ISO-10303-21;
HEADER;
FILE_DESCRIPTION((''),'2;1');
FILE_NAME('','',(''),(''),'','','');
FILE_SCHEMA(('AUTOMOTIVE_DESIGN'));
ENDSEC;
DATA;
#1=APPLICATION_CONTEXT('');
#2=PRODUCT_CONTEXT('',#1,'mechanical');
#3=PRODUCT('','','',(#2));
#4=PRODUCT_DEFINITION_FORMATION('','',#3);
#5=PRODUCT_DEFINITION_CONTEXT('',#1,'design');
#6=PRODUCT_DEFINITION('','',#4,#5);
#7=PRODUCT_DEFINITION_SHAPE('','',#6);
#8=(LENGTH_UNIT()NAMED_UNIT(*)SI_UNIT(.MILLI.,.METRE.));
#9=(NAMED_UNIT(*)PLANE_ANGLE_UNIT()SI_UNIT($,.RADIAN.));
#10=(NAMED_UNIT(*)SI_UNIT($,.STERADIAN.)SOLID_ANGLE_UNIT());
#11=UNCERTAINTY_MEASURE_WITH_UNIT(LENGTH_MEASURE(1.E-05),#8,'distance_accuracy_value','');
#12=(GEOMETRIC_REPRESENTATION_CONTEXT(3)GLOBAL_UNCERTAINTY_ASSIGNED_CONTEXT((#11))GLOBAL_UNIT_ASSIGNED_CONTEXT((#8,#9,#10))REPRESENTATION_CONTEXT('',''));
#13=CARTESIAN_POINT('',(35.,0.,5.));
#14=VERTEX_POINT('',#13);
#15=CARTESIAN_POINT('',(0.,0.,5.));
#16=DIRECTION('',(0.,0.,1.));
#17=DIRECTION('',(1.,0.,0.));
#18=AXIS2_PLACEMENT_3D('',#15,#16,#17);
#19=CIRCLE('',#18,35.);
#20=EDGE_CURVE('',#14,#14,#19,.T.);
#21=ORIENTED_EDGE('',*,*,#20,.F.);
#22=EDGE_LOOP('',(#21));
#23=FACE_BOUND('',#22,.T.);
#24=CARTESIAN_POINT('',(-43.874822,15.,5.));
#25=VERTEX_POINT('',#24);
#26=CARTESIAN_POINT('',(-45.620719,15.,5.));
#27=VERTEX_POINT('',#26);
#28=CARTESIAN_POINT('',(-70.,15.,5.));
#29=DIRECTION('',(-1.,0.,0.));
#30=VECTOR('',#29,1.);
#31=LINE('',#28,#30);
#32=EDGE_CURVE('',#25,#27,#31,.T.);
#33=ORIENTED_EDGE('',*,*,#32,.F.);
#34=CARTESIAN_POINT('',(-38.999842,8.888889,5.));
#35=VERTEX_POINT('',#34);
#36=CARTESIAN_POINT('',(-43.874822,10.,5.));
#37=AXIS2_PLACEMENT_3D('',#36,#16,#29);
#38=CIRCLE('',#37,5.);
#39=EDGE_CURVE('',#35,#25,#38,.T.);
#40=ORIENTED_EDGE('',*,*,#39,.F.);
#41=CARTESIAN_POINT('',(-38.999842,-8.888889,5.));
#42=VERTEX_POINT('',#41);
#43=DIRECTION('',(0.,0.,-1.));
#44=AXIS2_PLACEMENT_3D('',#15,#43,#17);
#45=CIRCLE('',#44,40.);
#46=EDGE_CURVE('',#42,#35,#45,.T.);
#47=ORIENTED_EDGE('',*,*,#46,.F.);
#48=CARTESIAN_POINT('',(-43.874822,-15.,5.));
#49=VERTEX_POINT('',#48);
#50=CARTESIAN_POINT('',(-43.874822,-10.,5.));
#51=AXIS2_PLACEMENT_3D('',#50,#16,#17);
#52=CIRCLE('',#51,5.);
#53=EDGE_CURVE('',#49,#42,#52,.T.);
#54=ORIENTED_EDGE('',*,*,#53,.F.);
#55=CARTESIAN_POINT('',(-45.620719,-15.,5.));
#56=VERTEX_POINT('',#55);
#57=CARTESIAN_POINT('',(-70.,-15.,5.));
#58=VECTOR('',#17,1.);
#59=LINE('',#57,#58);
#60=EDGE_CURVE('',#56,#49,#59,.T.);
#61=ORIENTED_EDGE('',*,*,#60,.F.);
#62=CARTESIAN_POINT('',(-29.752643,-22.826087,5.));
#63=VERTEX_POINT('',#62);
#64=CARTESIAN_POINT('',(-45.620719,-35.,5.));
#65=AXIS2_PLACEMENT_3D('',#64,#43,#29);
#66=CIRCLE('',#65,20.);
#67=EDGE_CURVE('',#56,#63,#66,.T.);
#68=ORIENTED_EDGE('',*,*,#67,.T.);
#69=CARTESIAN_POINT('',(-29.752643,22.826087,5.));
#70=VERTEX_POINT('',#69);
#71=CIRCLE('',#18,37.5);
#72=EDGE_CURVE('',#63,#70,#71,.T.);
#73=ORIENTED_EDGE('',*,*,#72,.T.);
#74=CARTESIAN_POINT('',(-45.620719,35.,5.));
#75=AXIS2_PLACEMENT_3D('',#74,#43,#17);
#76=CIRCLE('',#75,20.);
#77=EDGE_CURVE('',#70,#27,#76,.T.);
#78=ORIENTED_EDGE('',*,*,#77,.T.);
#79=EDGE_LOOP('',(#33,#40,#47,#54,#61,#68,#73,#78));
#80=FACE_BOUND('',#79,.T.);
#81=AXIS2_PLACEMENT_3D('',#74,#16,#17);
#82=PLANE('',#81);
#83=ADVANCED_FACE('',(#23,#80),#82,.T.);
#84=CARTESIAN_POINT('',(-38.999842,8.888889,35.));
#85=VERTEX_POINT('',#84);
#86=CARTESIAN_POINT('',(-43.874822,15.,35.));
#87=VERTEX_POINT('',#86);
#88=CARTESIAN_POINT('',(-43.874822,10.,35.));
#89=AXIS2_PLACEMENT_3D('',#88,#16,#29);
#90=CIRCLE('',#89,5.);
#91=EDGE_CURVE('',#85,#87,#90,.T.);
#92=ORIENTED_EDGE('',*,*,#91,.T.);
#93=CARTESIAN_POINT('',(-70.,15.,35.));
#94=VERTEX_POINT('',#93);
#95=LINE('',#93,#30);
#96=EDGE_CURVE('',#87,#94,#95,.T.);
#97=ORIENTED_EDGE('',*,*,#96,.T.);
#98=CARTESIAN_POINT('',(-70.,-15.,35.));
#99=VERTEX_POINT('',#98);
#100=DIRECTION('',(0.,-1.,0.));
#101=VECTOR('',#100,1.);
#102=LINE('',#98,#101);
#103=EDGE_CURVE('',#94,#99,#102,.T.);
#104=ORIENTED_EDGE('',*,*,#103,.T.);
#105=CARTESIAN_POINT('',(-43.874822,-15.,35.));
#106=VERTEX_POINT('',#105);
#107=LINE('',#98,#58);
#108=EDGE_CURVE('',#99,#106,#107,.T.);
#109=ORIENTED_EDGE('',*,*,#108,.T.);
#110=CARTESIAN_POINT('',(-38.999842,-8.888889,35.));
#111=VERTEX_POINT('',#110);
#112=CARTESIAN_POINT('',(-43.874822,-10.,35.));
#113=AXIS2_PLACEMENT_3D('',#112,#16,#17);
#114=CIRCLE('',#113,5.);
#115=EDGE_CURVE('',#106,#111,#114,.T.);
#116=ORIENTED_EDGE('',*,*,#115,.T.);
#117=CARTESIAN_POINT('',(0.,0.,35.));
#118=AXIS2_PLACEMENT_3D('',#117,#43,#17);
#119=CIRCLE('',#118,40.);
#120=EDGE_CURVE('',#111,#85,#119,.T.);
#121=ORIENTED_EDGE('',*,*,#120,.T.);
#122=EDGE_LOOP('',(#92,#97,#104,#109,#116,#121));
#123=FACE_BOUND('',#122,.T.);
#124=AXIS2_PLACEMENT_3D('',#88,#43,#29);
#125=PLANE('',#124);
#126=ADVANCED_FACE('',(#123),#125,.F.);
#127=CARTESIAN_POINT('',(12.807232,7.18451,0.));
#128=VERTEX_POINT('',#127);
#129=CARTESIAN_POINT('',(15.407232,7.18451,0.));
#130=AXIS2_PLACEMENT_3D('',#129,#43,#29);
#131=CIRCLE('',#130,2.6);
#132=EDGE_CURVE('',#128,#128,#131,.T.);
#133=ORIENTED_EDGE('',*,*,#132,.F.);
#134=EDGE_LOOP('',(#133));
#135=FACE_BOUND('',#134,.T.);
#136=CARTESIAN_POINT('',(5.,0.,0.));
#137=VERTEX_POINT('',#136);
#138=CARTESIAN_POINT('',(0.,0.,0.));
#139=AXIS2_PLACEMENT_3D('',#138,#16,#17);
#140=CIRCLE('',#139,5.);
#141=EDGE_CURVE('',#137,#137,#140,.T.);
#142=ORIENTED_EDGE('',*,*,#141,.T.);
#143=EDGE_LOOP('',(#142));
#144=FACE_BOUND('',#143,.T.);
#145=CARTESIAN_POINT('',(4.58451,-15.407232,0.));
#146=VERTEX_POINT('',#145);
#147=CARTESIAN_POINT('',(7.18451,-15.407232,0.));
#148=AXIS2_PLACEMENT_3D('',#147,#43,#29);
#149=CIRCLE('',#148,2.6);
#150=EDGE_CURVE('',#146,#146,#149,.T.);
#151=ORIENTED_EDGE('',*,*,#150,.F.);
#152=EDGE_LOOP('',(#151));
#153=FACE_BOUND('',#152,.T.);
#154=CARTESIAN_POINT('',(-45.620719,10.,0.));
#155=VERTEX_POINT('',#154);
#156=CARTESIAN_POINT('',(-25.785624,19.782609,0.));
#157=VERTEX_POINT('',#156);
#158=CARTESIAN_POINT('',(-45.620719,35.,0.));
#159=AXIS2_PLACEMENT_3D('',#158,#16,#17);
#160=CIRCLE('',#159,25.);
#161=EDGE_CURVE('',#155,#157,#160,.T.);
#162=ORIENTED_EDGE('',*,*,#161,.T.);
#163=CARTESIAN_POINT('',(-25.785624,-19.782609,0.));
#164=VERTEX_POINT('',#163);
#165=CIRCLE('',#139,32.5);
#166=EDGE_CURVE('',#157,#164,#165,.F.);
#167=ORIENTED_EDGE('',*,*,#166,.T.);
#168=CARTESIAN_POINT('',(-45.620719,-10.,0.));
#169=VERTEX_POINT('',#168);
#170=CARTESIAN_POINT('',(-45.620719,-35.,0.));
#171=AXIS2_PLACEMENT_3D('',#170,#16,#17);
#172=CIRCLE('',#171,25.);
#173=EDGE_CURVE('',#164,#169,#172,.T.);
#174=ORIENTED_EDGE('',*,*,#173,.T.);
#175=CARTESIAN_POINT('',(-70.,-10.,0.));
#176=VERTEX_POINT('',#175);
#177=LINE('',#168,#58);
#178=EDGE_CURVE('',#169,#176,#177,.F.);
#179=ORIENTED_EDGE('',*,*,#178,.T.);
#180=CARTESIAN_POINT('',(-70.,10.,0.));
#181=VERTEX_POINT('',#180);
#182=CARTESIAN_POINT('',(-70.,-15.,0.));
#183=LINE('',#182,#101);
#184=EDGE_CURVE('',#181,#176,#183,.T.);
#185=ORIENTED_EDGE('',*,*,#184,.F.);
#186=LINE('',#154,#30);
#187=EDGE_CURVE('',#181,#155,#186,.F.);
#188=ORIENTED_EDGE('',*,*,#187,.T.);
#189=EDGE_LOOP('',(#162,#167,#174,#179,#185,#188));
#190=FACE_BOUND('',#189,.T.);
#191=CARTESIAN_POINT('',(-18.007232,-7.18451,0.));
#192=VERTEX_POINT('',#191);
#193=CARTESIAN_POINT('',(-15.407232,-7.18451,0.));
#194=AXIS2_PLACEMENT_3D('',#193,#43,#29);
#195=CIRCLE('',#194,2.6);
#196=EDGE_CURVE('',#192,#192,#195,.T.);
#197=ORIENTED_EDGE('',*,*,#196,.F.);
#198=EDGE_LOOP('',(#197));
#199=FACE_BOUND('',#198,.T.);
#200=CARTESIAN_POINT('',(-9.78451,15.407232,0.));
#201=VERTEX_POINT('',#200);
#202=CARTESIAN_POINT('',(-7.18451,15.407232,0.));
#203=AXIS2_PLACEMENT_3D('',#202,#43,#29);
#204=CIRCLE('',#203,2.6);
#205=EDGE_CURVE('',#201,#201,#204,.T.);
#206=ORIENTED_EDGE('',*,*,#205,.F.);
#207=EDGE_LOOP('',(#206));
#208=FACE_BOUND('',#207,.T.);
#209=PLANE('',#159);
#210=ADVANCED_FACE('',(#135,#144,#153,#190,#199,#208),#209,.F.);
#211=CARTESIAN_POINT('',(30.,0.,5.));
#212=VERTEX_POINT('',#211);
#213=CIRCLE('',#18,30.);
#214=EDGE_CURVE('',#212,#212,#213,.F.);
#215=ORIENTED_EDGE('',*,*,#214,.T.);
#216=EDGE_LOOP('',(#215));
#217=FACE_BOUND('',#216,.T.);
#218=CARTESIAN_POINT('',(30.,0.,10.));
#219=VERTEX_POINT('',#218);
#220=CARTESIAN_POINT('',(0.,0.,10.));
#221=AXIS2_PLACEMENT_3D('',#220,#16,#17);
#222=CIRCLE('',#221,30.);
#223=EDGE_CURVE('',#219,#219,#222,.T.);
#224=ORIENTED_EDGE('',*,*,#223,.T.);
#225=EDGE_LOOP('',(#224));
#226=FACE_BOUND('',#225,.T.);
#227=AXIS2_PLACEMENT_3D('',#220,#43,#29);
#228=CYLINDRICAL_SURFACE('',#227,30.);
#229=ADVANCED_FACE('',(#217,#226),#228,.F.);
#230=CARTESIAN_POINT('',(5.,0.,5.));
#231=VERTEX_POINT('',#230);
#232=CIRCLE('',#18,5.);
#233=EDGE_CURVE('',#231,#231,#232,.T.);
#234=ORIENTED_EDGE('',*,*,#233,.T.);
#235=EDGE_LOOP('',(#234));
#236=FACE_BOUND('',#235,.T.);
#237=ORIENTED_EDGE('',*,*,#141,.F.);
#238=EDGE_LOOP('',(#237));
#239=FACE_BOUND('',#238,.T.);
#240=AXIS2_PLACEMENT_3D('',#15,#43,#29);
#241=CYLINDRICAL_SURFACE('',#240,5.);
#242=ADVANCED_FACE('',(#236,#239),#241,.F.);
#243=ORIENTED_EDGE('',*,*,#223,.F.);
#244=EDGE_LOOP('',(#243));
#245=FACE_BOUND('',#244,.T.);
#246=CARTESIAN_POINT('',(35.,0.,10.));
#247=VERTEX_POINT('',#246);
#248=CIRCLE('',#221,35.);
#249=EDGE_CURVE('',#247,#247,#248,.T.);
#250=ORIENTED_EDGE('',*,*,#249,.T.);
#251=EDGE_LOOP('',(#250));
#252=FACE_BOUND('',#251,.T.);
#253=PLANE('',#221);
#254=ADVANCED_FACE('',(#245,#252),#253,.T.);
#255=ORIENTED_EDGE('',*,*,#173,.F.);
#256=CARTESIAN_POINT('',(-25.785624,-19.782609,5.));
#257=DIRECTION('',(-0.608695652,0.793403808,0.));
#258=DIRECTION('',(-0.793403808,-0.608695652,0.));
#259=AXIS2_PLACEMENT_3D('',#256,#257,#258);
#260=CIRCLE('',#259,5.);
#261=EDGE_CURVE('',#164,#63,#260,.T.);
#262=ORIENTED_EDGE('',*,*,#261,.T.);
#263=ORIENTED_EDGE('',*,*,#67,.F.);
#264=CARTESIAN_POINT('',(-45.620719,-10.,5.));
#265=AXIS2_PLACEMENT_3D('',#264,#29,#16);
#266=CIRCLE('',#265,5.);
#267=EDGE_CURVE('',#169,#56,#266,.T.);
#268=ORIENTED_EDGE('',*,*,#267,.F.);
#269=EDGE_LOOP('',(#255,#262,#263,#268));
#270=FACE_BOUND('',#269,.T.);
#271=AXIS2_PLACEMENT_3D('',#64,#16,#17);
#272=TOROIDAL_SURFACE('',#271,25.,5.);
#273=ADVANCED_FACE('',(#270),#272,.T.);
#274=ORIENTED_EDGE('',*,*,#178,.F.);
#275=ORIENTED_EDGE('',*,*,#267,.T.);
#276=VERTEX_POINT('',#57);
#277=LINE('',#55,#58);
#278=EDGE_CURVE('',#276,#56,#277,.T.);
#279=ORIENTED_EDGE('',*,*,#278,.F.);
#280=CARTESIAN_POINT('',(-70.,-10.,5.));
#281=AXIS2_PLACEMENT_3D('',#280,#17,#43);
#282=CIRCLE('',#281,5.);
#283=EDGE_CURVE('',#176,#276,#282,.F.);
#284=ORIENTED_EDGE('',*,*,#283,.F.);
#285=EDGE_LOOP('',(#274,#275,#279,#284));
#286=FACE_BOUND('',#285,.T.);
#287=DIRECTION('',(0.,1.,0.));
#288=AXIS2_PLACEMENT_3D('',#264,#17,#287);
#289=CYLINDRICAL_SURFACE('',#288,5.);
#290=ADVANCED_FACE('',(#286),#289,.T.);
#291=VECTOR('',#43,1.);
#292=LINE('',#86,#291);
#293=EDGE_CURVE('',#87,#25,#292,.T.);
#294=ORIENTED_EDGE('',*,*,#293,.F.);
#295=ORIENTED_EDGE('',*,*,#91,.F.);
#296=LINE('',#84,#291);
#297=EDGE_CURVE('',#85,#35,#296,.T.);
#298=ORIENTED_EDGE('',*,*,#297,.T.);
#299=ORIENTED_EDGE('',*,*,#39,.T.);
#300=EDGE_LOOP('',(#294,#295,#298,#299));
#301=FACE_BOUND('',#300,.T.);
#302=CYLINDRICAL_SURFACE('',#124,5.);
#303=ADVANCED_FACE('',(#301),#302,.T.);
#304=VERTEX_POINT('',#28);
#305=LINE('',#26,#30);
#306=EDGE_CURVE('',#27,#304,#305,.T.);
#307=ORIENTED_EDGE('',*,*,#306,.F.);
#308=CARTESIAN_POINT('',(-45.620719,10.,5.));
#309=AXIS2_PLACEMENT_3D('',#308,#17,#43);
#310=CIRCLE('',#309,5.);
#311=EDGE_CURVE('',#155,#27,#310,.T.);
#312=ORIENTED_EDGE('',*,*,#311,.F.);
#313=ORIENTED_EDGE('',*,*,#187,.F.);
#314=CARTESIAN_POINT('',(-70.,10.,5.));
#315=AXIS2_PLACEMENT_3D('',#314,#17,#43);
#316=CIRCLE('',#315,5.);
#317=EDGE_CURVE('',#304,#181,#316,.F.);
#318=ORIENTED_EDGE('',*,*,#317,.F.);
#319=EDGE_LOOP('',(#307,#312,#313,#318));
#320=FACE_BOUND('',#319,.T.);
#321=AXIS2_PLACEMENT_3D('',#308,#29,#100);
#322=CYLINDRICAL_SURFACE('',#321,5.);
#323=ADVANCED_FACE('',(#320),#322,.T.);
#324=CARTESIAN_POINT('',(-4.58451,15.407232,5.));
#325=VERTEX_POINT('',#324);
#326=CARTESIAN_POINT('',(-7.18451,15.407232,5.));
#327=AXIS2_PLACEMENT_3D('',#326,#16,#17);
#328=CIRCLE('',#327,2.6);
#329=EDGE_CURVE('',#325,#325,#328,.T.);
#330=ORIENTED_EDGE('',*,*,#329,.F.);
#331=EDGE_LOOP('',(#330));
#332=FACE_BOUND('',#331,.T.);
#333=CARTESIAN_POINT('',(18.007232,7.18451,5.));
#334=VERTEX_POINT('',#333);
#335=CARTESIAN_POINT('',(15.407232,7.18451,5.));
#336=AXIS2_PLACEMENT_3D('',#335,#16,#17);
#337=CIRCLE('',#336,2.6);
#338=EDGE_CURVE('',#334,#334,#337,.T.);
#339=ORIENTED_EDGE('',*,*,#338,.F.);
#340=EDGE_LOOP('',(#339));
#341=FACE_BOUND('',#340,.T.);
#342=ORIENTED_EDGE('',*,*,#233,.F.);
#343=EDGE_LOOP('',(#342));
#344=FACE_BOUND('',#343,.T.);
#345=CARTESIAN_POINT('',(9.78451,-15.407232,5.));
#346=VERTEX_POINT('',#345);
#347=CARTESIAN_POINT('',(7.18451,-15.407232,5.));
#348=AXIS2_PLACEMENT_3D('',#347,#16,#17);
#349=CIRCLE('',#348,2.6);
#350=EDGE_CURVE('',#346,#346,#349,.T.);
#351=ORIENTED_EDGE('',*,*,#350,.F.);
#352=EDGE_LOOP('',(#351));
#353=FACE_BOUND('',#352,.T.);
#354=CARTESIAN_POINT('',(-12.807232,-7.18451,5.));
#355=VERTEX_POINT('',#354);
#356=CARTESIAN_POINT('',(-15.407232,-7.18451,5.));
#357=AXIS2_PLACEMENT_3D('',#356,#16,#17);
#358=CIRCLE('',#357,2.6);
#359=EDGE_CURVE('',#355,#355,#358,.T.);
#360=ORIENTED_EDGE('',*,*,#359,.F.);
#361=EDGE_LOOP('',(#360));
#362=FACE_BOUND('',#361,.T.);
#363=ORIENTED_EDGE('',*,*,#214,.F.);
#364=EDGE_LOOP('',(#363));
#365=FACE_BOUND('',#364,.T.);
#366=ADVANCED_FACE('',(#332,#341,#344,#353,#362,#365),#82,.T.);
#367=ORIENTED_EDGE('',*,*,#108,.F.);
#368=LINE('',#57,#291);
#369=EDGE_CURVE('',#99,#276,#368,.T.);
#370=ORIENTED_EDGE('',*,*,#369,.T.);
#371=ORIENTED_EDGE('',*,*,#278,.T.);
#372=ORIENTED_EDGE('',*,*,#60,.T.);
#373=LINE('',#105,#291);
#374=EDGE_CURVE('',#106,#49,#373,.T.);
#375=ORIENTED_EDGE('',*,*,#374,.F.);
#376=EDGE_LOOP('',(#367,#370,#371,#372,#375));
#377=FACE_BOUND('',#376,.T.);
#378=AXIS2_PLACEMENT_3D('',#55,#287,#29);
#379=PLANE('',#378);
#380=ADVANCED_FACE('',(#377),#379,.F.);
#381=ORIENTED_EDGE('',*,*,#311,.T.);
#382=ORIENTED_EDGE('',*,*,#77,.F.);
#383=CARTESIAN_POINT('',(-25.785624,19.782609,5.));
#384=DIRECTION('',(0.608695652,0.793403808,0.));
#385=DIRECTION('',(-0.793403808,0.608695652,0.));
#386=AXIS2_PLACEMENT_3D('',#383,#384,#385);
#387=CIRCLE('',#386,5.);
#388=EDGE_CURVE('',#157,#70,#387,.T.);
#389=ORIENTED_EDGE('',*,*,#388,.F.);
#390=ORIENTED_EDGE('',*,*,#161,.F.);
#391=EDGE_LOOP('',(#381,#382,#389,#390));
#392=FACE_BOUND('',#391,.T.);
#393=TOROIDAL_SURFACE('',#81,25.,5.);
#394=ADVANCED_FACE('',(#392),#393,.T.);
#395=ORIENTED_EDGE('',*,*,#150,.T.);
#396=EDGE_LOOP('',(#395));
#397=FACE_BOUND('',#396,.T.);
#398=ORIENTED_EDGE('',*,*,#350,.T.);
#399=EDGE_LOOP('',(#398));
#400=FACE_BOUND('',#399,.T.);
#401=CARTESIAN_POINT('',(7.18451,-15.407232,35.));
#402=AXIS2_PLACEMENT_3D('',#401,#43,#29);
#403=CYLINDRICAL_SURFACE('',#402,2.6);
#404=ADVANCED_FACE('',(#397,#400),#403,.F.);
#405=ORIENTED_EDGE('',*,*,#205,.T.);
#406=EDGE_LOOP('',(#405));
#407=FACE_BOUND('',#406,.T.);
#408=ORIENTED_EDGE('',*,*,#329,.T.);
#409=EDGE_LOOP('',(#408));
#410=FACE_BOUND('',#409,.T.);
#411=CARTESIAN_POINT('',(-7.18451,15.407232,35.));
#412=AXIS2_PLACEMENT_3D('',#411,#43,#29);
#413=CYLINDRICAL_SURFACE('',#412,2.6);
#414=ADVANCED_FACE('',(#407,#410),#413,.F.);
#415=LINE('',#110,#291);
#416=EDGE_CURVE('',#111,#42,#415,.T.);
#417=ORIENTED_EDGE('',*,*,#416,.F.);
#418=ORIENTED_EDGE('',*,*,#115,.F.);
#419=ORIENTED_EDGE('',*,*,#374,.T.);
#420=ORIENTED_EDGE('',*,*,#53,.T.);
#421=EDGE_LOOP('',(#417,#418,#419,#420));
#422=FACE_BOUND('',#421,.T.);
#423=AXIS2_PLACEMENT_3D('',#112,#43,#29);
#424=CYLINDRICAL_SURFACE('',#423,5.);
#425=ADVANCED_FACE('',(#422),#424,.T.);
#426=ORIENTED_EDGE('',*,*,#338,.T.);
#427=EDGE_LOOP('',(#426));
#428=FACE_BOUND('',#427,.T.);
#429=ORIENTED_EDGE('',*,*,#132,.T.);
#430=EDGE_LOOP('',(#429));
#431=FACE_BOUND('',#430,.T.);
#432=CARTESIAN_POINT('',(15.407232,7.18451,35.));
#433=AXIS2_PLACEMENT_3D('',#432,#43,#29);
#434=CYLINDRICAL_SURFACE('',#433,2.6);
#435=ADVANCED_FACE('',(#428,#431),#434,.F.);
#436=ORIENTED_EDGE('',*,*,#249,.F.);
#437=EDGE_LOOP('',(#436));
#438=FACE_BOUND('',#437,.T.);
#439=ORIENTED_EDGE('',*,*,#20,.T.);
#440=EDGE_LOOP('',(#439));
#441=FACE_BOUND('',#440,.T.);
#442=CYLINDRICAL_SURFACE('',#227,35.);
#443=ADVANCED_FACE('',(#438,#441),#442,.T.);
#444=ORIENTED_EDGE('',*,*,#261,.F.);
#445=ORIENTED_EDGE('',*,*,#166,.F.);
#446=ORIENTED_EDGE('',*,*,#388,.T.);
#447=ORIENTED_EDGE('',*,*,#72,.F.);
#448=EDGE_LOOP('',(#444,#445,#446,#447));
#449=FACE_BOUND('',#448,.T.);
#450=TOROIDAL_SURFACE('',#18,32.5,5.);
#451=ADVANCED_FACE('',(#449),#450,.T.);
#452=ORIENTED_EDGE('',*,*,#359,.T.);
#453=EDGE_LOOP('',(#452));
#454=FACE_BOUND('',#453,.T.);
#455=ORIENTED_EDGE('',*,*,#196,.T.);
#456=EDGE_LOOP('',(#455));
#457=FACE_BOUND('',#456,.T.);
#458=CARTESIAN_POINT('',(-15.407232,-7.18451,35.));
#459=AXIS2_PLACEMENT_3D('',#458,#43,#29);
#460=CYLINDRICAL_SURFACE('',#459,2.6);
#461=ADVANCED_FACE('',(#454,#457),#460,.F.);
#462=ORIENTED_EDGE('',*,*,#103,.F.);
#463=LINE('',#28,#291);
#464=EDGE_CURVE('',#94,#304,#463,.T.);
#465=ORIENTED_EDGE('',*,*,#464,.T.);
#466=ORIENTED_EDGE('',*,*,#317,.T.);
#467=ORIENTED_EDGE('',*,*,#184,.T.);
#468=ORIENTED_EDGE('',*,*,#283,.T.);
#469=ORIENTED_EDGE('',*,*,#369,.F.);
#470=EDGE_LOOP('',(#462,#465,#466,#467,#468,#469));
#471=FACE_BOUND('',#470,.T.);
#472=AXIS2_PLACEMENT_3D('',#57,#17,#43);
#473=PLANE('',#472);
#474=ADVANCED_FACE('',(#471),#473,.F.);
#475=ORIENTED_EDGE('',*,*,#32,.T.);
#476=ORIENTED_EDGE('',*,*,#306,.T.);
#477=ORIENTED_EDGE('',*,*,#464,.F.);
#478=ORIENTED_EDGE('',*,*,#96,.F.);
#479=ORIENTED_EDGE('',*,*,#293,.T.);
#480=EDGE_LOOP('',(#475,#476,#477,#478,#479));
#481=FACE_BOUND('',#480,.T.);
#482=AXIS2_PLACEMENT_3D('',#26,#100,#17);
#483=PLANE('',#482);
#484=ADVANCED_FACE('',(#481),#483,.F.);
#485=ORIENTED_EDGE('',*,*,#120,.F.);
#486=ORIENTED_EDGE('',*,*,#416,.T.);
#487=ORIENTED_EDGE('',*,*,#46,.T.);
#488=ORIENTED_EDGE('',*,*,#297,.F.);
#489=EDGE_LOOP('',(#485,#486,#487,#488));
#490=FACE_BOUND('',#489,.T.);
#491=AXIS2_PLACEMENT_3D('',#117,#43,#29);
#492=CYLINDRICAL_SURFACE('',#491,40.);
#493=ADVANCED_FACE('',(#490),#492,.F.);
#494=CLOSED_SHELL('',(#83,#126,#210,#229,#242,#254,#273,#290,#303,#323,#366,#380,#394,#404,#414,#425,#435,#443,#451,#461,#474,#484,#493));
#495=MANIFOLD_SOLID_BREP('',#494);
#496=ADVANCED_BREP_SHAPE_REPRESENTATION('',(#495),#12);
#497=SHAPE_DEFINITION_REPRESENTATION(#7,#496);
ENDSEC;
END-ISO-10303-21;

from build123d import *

# Parameters (mm, degrees)
ESQUISSE1_R             = 5
BOSS_EXTRU_1_DEPTH      = 5
ESQUISSE6_R             = 35
ESQUISSE6_R_2           = 30
BOSS_EXTRU_6_DEPTH      = 5
BOSS_EXTRU_9_DEPTH      = 30
CONG_3_R                = 5
ESQUISSE10_R            = 2.6
ENL_V_MAT_EXTRU_1_DEPTH = 87.782774789


with BuildPart() as part:
    # Esquisse1 → Boss.-Extru.1 (new body)
    with BuildSketch(Plane.XY):
        with BuildLine():
            Line((-45.620718977, 15), (-70, 15))
            Line((-70, 15), (-70, -15))
            Line((-70, -15), (-45.620718977, -15))
            ThreePointArc((-45.620718977, -15), (-36.774201608, -17.062911874), (-29.752642811, -22.826086957))
            ThreePointArc((-29.752642811, -22.826086957), (37.5, 0), (-29.752642811, 22.826086957))
            ThreePointArc((-29.752642811, 22.826086957), (-36.774201608, 17.062911874), (-45.620718977, 15))
        make_face()
        Circle(ESQUISSE1_R, mode=Mode.SUBTRACT)
    extrude(amount=BOSS_EXTRU_1_DEPTH)

    # Esquisse6 → Boss.-Extru.6 (add)
    with BuildSketch(Plane.XY.offset(5)):
        Circle(ESQUISSE6_R)
        Circle(ESQUISSE6_R_2, mode=Mode.SUBTRACT)
    extrude(amount=BOSS_EXTRU_6_DEPTH)

    # Esquisse8 → Boss.-Extru.9 (add)
    with BuildSketch(Plane.XY.offset(5)):
        with BuildLine():
            Line((-70, -15), (-70, 15))
            Line((-70, 15), (-43.874821937, 15))
            ThreePointArc((-43.874821937, 15), (-39.966142137, 13.118047822), (-38.999841722, 8.888888889))
            ThreePointArc((-38.999841722, 8.888888889), (-40, 0), (-38.999841722, -8.888888889))
            ThreePointArc((-38.999841722, -8.888888889), (-39.966142137, -13.118047822), (-43.874821937, -15))
            Line((-43.874821937, -15), (-70, -15))
        make_face()
    extrude(amount=BOSS_EXTRU_9_DEPTH)

    # Congé3
    cong_3_edges = [part.edges().sort_by_distance(p)[0] for p in [
        (37.5, 0, 0),
        (-57.810359489, 15, 0),
        (-57.810359489, -15, 0),
        (-36.774201608, -17.062911874, 0),
        (-36.774201608, 17.062911874, 0),
    ]]
    fillet(cong_3_edges, radius=CONG_3_R - 0.0001)  # a hair under: the kernel refuses the full size

    # Esquisse10 → Enlèv. mat.-Extru.1 (cut, through all)
    with BuildSketch(Plane(origin=(0, 0, 0), x_dir=(-1, 0, 0), z_dir=(0, 0, -1))):
        with Locations((-15.40723238, 7.18451045)):
            Circle(ESQUISSE10_R)
        with Locations((7.18451045, 15.40723238)):
            Circle(ESQUISSE10_R)
        with Locations((15.40723238, -7.18451045)):
            Circle(ESQUISSE10_R)
        with Locations((-7.18451045, -15.40723238)):
            Circle(ESQUISSE10_R)
    extrude(amount=-ENL_V_MAT_EXTRU_1_DEPTH, mode=Mode.SUBTRACT)


solid = part.part
